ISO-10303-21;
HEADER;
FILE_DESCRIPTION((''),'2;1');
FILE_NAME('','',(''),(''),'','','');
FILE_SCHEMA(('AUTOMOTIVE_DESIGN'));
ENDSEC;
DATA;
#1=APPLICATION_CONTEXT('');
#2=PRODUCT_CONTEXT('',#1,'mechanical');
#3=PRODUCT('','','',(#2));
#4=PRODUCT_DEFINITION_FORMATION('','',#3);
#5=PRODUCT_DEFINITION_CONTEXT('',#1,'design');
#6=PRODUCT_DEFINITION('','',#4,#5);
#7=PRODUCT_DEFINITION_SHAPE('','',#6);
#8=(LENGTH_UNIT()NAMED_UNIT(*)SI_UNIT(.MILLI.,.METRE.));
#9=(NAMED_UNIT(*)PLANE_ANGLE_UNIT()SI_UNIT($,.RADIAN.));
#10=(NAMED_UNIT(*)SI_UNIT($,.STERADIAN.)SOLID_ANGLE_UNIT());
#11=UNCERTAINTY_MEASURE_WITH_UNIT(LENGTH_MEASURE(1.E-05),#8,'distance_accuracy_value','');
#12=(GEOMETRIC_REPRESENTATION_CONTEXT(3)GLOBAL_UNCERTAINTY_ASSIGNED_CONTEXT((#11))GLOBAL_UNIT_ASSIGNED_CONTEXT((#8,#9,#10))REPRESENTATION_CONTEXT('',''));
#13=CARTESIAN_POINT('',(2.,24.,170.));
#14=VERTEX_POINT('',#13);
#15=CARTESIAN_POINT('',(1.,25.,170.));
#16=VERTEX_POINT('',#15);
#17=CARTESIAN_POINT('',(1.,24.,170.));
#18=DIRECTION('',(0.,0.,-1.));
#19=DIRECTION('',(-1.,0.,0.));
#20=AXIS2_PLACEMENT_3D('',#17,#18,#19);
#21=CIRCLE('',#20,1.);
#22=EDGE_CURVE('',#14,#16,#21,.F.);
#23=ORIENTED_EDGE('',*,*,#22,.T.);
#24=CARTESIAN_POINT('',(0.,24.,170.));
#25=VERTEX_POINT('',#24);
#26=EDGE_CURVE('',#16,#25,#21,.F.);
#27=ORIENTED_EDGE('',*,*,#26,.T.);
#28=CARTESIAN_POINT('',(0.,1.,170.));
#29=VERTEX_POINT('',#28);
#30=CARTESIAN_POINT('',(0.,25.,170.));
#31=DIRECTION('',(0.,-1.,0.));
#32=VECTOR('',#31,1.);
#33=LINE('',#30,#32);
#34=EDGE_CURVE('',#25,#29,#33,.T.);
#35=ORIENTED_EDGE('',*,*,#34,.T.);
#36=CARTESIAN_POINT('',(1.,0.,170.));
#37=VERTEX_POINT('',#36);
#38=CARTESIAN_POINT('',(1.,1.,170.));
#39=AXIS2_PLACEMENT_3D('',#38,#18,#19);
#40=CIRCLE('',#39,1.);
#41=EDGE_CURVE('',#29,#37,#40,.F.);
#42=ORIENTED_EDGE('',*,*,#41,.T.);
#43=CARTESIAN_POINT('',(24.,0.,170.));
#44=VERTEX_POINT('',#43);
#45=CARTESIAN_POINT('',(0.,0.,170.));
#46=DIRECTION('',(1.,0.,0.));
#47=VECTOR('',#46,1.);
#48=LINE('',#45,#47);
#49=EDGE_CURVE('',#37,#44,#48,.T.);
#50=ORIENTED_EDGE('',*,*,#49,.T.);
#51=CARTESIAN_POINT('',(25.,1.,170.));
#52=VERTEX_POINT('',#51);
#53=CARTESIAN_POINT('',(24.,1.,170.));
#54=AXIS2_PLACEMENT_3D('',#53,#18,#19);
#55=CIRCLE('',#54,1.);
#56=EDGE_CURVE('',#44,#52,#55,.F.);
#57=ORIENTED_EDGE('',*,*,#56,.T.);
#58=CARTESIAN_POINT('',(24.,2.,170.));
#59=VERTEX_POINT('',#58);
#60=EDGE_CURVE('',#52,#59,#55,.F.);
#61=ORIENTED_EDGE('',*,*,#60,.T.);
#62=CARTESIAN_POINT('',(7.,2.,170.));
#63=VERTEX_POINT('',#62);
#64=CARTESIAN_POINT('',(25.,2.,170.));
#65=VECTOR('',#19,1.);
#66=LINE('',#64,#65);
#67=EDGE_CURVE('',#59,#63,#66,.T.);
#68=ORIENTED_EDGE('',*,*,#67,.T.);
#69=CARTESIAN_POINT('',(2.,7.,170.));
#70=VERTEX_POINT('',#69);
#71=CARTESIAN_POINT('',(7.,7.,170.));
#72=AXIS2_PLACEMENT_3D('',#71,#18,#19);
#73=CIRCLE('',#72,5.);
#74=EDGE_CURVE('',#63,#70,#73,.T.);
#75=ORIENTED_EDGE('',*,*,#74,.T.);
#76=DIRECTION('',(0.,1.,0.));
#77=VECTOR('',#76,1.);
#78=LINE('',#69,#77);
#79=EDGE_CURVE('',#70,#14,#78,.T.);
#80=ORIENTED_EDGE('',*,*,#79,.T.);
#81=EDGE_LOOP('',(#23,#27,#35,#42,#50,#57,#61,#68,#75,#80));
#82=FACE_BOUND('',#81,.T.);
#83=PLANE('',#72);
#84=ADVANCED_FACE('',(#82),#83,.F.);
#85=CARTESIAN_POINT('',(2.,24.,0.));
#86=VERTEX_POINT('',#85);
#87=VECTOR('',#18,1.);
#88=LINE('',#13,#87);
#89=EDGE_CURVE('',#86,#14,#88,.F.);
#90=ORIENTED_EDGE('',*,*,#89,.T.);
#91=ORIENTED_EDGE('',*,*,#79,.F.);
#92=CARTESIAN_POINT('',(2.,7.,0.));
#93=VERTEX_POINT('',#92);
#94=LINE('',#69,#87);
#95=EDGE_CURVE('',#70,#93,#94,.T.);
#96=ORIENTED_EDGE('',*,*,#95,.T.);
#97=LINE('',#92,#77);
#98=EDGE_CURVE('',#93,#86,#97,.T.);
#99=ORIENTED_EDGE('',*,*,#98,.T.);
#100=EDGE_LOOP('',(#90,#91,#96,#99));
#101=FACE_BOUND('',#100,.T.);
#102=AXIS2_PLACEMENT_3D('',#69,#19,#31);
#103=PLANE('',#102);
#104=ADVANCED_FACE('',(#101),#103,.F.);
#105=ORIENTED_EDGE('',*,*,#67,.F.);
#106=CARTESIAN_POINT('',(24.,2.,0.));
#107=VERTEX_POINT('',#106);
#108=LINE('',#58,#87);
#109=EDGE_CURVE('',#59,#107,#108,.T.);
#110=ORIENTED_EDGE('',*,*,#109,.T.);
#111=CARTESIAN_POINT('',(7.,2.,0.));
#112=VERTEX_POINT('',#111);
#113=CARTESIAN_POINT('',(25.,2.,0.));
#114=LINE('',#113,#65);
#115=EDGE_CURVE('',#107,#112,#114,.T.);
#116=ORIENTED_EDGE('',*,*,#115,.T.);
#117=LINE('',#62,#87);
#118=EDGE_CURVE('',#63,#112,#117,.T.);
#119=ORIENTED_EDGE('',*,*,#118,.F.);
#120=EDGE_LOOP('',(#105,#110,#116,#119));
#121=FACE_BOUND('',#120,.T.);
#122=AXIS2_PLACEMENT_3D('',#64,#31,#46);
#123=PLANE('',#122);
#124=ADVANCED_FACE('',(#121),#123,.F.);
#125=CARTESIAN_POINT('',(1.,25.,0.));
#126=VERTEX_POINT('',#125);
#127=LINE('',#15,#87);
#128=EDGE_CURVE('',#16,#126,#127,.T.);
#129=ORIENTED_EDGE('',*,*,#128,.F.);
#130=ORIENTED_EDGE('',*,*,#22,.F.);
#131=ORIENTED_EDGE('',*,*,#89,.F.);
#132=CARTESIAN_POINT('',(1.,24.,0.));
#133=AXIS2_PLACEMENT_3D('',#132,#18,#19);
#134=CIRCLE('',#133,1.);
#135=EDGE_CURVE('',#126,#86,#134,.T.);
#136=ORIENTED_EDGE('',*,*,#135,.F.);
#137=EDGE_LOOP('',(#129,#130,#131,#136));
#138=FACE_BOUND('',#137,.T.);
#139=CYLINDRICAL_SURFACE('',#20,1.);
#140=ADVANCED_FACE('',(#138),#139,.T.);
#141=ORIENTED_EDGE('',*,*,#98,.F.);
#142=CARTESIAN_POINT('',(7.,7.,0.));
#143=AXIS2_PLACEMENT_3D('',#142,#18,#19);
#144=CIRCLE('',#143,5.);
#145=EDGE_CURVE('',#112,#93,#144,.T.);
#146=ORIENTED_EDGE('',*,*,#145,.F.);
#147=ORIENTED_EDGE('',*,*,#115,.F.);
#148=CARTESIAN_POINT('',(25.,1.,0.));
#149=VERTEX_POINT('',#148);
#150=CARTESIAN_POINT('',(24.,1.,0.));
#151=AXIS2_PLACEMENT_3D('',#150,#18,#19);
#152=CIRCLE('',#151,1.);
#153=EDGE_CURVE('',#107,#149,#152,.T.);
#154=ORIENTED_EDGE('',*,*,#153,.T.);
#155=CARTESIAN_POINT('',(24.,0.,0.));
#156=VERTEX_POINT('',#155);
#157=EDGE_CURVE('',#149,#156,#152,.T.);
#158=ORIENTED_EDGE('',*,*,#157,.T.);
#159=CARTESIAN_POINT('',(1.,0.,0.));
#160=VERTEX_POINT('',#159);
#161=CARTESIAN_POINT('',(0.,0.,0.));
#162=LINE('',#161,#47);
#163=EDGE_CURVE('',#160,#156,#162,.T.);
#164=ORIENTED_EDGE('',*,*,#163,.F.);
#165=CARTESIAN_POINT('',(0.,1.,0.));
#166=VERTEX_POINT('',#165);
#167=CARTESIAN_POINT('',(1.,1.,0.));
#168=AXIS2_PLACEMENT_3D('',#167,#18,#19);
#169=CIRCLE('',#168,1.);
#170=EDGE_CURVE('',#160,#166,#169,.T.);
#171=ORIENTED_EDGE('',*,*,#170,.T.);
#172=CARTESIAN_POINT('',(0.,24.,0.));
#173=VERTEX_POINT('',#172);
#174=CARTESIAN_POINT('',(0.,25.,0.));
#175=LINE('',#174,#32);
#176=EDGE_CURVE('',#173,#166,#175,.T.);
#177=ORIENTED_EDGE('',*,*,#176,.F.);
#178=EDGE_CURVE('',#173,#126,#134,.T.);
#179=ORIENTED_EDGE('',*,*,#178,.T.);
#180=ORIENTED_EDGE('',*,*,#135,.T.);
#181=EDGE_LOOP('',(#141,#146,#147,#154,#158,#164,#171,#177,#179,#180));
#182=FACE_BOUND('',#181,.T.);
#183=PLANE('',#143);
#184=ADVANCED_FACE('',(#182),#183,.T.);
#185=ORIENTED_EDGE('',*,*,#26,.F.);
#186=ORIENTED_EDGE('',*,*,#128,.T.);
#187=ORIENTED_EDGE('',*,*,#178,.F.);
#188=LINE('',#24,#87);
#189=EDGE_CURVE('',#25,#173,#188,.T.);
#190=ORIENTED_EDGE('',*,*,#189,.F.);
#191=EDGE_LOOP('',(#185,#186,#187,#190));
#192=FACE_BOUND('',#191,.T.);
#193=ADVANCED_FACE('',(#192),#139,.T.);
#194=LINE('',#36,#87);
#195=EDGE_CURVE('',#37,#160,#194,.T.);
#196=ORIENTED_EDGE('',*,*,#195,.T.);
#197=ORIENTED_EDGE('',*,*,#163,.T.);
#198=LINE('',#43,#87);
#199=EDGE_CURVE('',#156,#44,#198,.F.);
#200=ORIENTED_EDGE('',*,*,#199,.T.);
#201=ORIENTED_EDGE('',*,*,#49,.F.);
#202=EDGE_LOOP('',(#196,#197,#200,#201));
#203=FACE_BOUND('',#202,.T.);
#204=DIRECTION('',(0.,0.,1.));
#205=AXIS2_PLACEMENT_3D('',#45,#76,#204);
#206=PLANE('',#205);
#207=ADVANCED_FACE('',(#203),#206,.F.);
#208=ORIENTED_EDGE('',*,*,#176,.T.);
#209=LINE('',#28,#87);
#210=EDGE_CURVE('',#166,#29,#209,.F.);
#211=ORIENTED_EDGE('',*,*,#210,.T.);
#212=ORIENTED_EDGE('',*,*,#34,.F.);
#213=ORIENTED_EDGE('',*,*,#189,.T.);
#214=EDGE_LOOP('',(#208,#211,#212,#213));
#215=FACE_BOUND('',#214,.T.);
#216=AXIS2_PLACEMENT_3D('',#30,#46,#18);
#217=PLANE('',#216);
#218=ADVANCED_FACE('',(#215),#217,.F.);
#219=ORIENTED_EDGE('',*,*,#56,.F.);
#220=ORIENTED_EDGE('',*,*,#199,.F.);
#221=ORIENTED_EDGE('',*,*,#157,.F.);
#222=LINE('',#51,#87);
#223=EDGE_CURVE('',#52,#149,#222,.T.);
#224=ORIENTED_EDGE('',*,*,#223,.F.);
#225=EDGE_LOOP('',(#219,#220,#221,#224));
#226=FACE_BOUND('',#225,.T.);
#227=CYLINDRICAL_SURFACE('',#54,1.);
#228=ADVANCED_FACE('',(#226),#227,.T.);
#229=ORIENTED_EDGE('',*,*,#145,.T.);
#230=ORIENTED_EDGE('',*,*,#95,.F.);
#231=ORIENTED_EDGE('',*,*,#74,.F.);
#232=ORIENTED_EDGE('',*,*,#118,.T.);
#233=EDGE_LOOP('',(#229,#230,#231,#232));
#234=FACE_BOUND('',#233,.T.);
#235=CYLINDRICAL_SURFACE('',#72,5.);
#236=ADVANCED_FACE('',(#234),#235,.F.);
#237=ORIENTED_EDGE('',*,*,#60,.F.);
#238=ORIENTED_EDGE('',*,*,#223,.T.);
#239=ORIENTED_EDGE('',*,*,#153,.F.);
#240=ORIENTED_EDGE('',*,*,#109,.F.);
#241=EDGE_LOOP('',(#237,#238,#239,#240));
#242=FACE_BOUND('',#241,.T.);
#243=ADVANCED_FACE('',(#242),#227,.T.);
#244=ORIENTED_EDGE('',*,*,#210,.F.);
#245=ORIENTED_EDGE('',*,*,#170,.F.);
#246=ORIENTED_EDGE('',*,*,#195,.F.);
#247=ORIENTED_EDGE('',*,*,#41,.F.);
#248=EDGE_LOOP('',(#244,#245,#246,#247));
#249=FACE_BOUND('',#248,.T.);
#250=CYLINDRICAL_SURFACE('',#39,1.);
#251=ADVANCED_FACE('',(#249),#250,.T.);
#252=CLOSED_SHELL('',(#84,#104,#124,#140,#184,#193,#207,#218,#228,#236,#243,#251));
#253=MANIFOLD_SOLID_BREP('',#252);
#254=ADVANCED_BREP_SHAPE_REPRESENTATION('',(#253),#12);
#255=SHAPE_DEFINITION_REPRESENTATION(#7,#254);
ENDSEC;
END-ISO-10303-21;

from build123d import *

# Parameters (mm, degrees)
EXTRUDE_1_DEPTH = 170
FILLET_1_R      = 1


with BuildPart() as part:
    # 草图1 → 凸台-拉伸1 (new body)
    with BuildSketch(Plane.XY):
        with BuildLine():
            Line((0, 0), (25, 0))
            Line((25, 0), (25, 2))
            Line((25, 2), (7, 2))
            ThreePointArc((7, 2), (3.464466094, 3.464466094), (2, 7))
            Line((2, 7), (2, 25))
            Line((2, 25), (0, 25))
            Line((0, 25), (0, 0))
        make_face()
    extrude(amount=EXTRUDE_1_DEPTH)

    # 圆角1
    fillet_1_edges = [part.edges().sort_by_distance(p)[0] for p in [
        (0, 25, 85),
        (25, 2, 85),
        (25, 0, 85),
        (0, 0, 85),
        (2, 25, 85),
    ]]
    fillet(fillet_1_edges, radius=FILLET_1_R - 0.0001)  # a hair under: the kernel refuses the full size


solid = part.part
